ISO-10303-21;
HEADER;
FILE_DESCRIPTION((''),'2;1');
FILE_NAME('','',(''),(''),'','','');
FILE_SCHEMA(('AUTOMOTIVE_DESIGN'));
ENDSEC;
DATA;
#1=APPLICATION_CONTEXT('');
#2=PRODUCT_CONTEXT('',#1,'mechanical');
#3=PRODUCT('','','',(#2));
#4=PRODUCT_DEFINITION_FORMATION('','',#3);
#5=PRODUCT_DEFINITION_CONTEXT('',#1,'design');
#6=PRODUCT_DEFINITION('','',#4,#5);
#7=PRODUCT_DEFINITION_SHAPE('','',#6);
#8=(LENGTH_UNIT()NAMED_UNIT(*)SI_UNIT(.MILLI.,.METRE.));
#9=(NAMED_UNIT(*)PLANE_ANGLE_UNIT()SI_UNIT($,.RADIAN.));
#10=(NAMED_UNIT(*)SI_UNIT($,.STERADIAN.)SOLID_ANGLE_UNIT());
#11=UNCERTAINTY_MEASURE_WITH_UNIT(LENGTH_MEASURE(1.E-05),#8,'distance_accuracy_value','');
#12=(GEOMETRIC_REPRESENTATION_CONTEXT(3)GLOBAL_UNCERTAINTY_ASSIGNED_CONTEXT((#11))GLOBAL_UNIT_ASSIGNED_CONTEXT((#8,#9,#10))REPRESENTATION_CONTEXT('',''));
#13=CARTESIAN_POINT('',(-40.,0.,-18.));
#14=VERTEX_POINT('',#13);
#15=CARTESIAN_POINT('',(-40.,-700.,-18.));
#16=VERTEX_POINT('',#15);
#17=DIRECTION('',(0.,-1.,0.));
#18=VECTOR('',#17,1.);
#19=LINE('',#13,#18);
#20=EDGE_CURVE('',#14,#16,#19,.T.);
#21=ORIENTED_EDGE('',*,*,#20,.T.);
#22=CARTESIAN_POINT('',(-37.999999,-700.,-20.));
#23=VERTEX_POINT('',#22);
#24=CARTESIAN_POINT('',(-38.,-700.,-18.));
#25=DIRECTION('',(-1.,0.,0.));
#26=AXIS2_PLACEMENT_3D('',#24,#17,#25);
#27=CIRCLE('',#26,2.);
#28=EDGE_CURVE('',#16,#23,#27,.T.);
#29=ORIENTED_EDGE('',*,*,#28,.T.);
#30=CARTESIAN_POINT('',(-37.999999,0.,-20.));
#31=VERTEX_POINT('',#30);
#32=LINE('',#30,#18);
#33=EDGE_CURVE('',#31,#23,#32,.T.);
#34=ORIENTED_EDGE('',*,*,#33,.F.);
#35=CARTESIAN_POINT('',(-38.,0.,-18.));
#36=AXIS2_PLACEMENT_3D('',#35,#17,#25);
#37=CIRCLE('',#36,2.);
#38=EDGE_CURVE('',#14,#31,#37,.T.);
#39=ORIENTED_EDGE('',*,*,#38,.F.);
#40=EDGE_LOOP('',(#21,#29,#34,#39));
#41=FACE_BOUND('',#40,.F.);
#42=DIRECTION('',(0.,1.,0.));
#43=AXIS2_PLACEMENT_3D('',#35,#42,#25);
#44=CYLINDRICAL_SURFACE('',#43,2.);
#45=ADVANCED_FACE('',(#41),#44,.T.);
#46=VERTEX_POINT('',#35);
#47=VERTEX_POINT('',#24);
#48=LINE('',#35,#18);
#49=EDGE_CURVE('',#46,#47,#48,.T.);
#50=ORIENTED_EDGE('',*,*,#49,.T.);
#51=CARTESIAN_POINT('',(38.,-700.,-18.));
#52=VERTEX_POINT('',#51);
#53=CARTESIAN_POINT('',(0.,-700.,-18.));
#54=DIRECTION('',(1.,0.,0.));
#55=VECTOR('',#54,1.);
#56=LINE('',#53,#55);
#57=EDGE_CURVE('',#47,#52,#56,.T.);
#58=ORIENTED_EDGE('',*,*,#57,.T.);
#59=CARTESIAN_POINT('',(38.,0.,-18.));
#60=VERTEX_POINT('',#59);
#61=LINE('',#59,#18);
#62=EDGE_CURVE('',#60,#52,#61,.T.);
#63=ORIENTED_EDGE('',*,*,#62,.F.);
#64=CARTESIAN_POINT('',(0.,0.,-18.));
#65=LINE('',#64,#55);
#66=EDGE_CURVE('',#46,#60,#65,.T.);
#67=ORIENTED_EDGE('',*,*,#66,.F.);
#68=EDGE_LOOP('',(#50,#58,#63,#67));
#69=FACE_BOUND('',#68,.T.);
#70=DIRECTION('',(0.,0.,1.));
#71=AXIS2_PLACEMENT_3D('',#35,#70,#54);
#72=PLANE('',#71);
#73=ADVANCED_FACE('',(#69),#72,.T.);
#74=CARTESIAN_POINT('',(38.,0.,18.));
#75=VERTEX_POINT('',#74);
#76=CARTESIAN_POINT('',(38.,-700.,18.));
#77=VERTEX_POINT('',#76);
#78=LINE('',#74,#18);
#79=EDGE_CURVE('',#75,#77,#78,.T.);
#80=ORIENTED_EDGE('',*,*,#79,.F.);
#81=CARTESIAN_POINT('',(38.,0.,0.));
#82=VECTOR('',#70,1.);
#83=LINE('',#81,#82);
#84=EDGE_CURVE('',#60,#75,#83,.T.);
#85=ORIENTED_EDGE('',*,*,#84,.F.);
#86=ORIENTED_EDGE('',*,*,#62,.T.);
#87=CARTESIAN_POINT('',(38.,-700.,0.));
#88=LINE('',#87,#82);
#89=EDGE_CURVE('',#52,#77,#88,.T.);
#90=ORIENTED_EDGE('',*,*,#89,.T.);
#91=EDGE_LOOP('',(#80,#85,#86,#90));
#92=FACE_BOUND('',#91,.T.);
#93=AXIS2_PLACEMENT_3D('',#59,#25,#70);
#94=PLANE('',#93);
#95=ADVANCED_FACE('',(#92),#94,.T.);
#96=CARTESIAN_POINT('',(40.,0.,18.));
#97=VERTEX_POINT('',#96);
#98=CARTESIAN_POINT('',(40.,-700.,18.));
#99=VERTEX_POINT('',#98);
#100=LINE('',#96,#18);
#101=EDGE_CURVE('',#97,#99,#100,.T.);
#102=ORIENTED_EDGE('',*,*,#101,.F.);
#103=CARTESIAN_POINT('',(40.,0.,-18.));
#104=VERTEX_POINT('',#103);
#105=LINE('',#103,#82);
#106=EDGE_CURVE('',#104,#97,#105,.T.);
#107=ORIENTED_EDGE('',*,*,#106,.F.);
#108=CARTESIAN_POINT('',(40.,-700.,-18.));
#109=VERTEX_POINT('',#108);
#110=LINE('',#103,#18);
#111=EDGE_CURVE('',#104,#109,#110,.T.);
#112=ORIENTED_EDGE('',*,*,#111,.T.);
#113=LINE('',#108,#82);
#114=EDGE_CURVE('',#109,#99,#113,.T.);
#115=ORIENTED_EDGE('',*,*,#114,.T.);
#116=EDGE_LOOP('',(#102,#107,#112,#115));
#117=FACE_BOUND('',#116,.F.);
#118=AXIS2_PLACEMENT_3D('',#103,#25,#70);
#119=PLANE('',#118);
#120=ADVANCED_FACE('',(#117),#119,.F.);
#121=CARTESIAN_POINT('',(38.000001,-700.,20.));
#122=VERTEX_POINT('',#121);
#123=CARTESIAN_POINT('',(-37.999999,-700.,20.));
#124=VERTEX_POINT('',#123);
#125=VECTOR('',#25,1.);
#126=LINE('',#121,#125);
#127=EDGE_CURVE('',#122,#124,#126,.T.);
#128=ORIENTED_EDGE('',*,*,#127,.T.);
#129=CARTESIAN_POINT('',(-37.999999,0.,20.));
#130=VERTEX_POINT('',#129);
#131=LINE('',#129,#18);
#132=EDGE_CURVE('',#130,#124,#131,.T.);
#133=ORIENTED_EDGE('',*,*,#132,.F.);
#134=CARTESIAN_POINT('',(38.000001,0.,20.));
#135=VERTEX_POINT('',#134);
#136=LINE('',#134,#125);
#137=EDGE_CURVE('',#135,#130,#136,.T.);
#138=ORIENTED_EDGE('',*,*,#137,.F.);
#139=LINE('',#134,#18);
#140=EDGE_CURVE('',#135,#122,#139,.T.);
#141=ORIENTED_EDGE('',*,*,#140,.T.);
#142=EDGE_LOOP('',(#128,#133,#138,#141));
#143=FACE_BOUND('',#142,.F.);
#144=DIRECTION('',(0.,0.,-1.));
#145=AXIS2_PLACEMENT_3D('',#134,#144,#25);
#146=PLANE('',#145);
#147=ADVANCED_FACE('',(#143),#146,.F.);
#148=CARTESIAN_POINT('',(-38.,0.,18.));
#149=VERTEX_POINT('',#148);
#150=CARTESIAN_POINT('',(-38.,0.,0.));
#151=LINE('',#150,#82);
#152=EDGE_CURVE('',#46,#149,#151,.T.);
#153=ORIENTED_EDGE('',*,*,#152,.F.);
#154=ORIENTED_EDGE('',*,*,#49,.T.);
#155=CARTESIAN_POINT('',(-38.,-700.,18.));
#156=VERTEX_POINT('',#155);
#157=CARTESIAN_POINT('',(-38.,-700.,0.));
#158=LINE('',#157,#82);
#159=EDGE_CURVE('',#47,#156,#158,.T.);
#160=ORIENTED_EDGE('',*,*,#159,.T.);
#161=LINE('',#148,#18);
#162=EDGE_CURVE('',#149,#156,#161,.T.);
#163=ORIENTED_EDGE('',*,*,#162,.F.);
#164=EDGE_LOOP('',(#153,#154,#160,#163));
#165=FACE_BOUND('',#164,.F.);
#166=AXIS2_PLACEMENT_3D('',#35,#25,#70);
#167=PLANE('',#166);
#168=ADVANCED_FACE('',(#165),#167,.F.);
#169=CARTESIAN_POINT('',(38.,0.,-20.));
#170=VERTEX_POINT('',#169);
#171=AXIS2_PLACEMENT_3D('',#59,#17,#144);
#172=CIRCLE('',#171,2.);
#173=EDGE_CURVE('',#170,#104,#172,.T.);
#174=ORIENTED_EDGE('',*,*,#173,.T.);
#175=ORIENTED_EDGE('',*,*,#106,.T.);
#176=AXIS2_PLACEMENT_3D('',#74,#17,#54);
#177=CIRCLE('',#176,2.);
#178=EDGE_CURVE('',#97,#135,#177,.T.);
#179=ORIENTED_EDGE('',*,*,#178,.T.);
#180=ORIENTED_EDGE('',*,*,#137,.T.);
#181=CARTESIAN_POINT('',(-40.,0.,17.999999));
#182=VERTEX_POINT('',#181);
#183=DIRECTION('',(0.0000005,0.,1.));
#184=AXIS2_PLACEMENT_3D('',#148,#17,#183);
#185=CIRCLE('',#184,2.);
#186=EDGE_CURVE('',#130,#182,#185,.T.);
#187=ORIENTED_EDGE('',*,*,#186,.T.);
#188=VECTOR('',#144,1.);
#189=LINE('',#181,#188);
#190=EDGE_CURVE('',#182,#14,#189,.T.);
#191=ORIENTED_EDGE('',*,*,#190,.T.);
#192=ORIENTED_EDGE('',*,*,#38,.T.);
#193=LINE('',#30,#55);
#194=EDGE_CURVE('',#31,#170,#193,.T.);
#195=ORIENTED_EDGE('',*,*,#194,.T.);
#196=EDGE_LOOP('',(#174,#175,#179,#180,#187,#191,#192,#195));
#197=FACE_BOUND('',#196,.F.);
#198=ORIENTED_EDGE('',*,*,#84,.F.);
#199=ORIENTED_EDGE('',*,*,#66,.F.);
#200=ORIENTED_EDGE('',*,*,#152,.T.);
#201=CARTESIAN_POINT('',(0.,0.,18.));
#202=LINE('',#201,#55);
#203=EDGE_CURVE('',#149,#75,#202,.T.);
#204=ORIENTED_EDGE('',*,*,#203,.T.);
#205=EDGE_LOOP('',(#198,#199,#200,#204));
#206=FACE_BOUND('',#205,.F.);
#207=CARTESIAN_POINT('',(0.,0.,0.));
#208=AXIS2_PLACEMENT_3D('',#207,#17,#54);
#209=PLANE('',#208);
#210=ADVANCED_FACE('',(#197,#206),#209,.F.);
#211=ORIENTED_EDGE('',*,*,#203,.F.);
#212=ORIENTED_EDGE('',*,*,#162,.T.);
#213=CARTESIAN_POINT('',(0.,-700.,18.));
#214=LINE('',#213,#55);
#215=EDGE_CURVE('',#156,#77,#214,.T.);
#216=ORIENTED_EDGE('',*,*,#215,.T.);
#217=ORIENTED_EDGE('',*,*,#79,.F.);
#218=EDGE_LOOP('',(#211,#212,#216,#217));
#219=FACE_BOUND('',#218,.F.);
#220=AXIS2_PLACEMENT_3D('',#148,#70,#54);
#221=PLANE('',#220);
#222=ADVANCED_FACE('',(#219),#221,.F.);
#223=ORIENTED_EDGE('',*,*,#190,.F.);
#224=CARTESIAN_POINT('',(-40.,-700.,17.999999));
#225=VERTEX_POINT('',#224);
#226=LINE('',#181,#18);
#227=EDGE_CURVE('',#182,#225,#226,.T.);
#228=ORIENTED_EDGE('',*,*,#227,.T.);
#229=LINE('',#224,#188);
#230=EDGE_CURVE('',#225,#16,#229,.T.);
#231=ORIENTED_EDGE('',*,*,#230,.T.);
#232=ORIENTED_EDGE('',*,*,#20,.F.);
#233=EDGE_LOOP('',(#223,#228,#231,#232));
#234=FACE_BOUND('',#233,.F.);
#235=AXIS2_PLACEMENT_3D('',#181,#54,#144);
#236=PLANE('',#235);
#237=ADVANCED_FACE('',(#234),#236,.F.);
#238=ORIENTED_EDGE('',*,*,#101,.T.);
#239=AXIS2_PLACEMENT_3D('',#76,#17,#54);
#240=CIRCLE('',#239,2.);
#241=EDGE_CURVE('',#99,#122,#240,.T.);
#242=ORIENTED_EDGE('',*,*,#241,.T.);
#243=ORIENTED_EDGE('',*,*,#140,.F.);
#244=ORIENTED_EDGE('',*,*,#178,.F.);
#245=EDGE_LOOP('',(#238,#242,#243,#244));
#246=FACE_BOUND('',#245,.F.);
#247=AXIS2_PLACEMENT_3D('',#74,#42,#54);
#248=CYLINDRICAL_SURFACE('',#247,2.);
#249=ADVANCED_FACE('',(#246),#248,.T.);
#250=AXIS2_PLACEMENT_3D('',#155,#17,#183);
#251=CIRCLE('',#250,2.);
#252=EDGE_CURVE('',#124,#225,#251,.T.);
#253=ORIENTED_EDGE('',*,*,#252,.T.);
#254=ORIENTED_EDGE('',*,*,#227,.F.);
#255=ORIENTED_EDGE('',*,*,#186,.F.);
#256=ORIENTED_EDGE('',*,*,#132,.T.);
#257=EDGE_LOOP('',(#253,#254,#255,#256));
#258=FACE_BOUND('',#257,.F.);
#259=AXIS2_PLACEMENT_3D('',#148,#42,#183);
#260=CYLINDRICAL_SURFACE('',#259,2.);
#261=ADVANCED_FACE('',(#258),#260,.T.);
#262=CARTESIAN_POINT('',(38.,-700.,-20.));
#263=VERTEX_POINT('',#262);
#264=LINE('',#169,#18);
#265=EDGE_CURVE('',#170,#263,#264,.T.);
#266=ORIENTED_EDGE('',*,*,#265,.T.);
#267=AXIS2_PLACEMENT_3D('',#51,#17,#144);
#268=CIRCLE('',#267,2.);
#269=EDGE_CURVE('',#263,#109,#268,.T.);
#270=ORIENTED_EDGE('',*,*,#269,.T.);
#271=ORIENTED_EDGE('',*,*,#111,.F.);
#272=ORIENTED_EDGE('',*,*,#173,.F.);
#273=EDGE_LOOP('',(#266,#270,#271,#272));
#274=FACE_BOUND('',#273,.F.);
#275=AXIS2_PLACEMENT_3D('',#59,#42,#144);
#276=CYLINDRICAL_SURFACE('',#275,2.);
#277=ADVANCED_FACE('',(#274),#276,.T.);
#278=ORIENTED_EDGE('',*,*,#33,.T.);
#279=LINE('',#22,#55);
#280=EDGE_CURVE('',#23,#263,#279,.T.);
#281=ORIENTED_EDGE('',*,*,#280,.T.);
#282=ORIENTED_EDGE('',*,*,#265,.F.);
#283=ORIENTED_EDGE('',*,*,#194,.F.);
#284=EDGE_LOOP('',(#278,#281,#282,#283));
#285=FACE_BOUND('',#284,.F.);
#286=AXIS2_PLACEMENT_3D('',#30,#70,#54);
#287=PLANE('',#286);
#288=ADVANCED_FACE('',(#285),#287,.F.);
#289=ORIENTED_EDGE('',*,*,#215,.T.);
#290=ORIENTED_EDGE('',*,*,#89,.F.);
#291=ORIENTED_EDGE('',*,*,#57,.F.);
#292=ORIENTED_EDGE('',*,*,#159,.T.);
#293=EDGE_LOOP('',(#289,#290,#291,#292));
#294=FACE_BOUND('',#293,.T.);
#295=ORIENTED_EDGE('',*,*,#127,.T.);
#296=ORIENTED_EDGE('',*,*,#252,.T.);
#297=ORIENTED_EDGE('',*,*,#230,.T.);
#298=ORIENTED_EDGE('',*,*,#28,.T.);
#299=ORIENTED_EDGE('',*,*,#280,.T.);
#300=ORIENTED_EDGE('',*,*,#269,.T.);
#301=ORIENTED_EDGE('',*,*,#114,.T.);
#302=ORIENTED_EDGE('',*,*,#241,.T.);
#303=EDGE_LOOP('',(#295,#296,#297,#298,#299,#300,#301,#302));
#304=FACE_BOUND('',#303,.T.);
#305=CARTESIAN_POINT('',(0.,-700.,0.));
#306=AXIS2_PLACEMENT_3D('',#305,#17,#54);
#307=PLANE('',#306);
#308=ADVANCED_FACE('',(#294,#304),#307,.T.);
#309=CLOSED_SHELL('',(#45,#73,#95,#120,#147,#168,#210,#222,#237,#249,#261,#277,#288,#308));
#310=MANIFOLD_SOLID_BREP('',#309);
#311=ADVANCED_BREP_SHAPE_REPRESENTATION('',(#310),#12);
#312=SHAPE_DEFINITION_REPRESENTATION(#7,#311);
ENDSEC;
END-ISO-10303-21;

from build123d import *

# Parameters (mm, degrees)
F0_W     = 76
F0_H     = 36
F1_DEPTH = 700


# Not quite as in the source:
# - ends of sketch curves that miss each other by under 0.0002 mm in the source are joined


with BuildPart() as f1:
    # F0 (on Front) → F1 (new body)
    with BuildSketch(Plane.XZ):
        with BuildLine():
            ThreePointArc((-37.999999, 20), (-39.4142135624, 19.4142135624), (-40, 17.999999))
            Line((-40, 17.999999), (-40, -18))
            ThreePointArc((-40, -18), (-39.4142128553, -19.4142142695), (-37.999999, -20))
            Line((-37.999999, -20), (38, -20))
            ThreePointArc((38, -20), (39.4142139159, -19.4142132088), (40, -18))
            Line((40, -18), (40, 18))
            ThreePointArc((40, 18), (39.4142139159, 19.4142132088), (38.000001, 20))
            Line((38.000001, 20), (-37.999999, 20))
        make_face()
        Rectangle(F0_W, F0_H, mode=Mode.SUBTRACT)
    extrude(amount=F1_DEPTH)


solid = f1.part
